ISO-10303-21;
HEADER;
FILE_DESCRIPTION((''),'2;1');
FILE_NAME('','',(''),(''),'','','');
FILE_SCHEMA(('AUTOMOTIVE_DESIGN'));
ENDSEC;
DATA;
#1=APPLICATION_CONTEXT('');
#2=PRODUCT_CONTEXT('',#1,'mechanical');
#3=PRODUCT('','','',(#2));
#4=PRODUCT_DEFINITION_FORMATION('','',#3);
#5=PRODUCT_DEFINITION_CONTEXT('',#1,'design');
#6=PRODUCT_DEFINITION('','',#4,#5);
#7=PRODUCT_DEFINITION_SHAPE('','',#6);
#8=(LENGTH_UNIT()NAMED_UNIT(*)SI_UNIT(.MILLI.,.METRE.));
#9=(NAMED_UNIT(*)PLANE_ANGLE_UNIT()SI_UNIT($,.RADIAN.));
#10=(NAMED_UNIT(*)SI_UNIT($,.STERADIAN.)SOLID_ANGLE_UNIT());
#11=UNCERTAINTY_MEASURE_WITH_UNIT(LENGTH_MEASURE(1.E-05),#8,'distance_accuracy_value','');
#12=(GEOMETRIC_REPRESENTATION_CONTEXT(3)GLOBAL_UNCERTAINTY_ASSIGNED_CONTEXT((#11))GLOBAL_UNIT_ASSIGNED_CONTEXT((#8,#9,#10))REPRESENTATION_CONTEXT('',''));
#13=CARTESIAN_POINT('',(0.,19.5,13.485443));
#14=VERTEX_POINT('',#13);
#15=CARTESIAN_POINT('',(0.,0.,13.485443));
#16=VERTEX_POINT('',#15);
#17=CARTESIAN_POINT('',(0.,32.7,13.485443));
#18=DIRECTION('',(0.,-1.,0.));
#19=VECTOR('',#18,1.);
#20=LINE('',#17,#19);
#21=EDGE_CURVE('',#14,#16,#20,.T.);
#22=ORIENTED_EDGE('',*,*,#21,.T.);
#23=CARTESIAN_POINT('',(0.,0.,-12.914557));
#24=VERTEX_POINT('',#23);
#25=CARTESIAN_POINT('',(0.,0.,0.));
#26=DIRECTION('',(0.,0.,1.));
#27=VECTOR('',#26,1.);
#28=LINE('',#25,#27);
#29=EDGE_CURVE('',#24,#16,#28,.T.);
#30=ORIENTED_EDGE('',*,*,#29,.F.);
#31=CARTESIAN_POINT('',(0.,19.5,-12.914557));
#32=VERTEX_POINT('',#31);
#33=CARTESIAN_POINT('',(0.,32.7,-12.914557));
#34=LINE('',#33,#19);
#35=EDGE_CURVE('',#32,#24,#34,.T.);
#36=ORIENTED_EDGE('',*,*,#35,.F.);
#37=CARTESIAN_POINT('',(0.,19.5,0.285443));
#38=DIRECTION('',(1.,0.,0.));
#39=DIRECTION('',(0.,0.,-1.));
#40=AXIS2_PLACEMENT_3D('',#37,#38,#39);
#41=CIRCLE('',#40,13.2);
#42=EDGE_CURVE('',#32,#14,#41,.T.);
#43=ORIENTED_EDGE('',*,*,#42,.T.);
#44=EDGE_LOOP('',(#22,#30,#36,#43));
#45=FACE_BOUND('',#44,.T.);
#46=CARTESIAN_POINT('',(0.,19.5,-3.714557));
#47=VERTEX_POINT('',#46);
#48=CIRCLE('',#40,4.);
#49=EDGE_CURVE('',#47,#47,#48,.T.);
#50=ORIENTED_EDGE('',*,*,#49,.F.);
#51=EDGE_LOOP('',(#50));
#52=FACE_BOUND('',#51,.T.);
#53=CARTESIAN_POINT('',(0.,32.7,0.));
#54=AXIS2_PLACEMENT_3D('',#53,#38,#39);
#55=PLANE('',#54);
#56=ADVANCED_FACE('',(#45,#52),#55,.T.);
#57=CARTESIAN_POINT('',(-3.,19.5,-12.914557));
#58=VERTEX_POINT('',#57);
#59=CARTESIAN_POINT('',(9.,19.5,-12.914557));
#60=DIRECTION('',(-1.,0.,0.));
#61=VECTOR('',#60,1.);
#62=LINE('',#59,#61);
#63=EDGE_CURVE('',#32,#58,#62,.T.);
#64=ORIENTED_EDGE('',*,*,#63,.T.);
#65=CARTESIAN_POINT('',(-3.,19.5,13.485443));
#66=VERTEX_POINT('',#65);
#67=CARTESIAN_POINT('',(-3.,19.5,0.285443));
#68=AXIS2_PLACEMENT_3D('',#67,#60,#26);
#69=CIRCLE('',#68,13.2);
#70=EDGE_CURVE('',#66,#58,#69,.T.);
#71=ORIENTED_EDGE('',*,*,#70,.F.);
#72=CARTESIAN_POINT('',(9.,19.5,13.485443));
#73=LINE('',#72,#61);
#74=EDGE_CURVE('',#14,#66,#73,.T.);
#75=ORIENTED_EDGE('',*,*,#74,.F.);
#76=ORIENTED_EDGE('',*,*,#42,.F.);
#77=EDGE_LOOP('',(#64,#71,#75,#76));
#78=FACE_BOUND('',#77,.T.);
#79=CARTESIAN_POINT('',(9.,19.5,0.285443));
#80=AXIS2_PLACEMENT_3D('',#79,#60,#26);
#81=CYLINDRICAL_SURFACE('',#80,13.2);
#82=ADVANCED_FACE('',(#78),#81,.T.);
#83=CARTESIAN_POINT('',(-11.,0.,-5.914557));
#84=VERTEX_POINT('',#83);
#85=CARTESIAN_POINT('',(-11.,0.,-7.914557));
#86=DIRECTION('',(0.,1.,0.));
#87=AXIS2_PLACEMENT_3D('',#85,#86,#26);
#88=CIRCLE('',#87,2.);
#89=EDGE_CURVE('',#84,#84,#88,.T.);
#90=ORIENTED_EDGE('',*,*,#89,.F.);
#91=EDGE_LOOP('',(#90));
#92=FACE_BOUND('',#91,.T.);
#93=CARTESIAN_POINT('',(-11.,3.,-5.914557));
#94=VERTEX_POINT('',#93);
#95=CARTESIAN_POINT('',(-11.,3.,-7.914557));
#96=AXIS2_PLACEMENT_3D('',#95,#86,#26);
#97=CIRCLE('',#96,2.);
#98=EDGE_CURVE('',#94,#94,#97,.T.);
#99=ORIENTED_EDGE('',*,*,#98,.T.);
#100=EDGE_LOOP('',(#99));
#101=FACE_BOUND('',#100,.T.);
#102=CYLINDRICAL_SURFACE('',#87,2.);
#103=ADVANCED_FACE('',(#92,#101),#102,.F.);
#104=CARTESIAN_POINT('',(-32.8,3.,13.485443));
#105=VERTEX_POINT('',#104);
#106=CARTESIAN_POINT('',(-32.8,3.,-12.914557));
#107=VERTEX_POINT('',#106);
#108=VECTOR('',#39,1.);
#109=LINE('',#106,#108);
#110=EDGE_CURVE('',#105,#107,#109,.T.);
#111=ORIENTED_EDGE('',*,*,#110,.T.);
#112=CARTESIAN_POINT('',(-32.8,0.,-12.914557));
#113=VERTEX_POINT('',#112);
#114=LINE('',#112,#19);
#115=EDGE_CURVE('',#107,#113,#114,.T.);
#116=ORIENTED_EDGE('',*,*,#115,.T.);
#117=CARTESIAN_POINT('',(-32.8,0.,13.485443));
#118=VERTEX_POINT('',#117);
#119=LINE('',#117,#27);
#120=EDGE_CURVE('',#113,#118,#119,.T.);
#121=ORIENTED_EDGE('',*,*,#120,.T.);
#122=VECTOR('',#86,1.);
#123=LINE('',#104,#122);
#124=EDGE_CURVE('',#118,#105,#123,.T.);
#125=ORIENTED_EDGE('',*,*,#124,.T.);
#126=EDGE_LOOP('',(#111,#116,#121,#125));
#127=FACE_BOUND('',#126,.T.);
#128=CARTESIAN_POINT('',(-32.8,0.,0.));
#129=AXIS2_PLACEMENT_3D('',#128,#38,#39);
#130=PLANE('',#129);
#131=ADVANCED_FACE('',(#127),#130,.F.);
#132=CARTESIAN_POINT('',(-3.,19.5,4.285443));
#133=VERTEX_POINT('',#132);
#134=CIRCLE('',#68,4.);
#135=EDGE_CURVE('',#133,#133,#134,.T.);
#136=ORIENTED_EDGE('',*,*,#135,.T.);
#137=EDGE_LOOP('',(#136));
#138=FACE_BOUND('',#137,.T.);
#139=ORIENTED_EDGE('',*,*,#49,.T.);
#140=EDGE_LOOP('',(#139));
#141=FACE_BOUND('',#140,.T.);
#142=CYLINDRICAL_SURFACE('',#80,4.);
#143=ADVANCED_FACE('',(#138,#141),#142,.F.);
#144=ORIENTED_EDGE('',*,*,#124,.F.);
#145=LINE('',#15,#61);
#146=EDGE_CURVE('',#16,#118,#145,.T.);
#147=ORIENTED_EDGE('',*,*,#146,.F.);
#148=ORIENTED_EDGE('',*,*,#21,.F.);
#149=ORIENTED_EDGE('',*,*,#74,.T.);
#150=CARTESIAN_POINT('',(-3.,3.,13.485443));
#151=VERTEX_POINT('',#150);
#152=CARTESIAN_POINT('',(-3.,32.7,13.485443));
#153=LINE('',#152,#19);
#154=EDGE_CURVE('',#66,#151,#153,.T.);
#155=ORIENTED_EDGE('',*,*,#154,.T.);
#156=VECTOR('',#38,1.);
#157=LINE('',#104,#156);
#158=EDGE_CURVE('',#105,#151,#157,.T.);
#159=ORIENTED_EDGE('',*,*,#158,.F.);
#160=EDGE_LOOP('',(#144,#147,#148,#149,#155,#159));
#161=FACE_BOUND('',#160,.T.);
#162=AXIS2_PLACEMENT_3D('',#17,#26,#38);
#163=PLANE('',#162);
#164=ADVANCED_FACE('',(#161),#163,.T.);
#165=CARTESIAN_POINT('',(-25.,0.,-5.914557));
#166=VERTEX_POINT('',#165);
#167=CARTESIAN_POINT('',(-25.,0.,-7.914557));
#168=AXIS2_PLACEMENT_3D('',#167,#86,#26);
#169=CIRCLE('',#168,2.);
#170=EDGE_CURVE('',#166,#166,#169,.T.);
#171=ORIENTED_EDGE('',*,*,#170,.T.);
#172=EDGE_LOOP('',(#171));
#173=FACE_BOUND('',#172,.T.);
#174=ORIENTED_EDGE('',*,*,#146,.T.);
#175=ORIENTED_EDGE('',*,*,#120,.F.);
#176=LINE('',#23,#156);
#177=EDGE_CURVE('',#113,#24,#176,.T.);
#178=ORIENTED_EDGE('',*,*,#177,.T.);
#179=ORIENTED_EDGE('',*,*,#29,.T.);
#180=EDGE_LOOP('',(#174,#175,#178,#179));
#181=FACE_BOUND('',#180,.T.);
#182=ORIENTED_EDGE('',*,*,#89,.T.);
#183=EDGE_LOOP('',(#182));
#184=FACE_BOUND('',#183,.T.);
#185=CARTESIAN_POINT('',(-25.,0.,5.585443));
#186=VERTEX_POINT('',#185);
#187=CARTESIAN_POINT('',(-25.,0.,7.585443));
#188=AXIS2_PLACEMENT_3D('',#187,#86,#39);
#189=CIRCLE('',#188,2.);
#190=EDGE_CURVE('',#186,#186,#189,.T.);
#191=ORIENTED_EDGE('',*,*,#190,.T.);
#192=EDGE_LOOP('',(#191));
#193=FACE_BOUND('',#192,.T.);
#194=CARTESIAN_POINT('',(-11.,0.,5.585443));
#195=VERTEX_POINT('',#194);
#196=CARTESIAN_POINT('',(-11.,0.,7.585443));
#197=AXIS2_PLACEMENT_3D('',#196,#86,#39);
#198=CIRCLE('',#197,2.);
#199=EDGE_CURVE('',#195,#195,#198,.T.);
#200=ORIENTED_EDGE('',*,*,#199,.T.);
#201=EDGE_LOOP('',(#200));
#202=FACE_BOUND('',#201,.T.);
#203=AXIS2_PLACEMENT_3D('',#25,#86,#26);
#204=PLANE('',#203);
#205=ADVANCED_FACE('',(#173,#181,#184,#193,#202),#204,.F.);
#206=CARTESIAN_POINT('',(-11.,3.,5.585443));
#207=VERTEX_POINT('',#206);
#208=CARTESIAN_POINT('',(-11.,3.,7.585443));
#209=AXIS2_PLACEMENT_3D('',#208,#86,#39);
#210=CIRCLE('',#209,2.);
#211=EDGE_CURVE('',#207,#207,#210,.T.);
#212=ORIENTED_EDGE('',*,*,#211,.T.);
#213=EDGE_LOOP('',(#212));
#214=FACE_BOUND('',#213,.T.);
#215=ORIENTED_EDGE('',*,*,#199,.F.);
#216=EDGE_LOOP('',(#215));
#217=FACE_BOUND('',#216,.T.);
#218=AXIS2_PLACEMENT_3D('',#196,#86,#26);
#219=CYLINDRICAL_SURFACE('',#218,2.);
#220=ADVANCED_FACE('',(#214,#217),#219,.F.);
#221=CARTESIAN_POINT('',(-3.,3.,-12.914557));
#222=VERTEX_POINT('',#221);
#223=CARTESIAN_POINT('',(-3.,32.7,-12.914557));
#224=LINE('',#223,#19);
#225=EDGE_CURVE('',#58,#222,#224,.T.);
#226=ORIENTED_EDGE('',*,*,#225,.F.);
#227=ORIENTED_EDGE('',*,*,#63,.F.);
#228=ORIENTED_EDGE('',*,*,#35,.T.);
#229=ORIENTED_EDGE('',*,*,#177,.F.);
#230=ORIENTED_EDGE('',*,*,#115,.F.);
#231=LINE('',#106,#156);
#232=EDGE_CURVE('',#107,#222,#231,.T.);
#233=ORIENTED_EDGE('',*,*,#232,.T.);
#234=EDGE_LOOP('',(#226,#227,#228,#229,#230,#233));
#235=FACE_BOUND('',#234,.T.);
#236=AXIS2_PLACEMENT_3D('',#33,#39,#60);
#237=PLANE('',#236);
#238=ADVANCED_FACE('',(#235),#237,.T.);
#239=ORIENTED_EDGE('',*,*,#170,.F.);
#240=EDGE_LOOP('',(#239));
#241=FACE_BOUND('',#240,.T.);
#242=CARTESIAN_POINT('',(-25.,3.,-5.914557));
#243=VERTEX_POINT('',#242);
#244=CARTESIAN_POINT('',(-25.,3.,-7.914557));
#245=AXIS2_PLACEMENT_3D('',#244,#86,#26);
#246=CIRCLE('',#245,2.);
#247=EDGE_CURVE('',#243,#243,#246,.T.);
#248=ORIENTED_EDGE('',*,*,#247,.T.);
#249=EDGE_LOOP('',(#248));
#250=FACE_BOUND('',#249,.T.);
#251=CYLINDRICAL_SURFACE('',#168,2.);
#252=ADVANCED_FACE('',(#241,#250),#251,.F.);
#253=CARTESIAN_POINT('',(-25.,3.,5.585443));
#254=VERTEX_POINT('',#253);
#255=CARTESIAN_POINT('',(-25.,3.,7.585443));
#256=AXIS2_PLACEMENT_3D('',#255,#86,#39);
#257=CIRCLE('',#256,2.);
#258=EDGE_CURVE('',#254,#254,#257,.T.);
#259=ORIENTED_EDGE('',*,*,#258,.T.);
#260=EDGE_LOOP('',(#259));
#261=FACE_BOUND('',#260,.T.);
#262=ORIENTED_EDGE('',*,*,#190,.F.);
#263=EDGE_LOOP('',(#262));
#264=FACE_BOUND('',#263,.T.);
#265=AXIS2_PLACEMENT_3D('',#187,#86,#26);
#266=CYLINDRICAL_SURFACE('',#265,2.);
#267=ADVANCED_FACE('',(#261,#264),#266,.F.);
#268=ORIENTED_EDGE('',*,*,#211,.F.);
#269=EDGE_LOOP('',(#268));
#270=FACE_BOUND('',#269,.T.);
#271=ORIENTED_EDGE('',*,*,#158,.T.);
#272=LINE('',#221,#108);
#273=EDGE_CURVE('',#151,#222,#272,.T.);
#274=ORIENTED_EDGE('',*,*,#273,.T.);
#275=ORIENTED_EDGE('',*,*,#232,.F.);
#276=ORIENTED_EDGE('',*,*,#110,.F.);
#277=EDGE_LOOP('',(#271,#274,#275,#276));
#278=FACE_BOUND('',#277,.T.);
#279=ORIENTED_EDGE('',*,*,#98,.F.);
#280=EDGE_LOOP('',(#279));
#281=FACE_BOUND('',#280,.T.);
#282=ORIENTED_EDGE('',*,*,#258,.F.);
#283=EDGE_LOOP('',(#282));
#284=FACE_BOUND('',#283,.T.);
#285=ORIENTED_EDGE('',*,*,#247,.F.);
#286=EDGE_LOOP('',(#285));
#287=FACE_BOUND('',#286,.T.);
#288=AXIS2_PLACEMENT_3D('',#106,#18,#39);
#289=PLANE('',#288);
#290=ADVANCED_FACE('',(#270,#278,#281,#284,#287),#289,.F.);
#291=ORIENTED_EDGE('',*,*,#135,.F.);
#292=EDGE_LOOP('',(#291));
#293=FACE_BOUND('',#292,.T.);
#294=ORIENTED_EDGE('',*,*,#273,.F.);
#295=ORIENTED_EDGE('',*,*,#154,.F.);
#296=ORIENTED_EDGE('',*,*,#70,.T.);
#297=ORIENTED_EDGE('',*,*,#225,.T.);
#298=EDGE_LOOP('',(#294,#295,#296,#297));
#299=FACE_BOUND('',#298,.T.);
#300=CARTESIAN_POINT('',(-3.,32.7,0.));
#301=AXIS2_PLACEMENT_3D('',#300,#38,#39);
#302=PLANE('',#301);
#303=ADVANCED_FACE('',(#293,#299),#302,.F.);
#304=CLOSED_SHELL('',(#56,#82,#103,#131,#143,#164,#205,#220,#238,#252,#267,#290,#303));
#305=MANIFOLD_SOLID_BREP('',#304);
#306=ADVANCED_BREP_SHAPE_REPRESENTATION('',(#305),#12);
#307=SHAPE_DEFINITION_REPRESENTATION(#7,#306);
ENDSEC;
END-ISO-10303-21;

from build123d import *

# Parameters (mm, degrees)
BOSS_EXTRUDE1_OUTLINE_W = 3
BOSS_EXTRUDE1_OUTLINE_H = 26.4
BOSS_EXTRUDE1_DEPTH     = 32.7
SKETCH2_W               = 26.4
SKETCH2_H               = 3
BOSS_EXTRUDE2_DEPTH     = 29.8
SKETCH3_R               = 2
CUT_EXTRUDE1_DEPTH      = 3
CUT_EXTRUDE3_DEPTH      = 12
SKETCH6_R               = 4
CUT_EXTRUDE4_DEPTH      = 12


# Read off the part's stored shape, not the designer's step: Boss-Extrude1
with BuildPart() as part:
    # Boss-Extrude1 outline → Boss-Extrude1 (new body)
    with BuildSketch(Plane(origin=(0, 0, 0), x_dir=(1, 0, 0), z_dir=(0, 1, 0))):
        with Locations((-1.5, -0.285443038)):
            Rectangle(BOSS_EXTRUDE1_OUTLINE_W, BOSS_EXTRUDE1_OUTLINE_H)
    extrude(amount=BOSS_EXTRUDE1_DEPTH)

    # Sketch2 → Boss-Extrude2 (add)
    with BuildSketch(Plane.ZY.offset(3)):
        with Locations((0.285443038, 1.5)):
            Rectangle(SKETCH2_W, SKETCH2_H)
    extrude(amount=BOSS_EXTRUDE2_DEPTH)

    # Sketch3 → Cut-Extrude1 (cut)
    with BuildSketch(Plane(origin=(0, 3, 0), x_dir=(1, 0, 0), z_dir=(0, 1, 0))):
        with Locations(Location((-25, 7.914556962, 0), (0, 0, 270))):
            Circle(SKETCH3_R)
        with Locations(Location((-11, 7.914556962, 0), (0, 0, 270))):
            Circle(SKETCH3_R)
        with Locations(Location((-11, -7.585443038, 0), (0, 0, 90))):
            Circle(SKETCH3_R)
        with Locations(Location((-25, -7.585443038, 0), (0, 0, 90))):
            Circle(SKETCH3_R)
    extrude(amount=-CUT_EXTRUDE1_DEPTH, mode=Mode.SUBTRACT)

    # Sketch5 → Cut-Extrude3 (cut)
    with BuildSketch(Plane.ZY.offset(3)):
        with BuildLine():
            Line((0.285443053, 32.7), (-12.914556962, 32.7))
            Line((-12.914556962, 32.7), (-12.914556962, 19.5))
            ThreePointArc((-12.914556962, 19.5), (-9.048366468, 28.833809517), (0.285443053, 32.7))
        make_face()
        with BuildLine():
            Line((13.485443038, 32.7), (0.285443053, 32.7))
            ThreePointArc((0.285443053, 32.7), (9.619252555, 28.833809506), (13.485443038, 19.5))
            Line((13.485443038, 19.5), (13.485443038, 32.7))
        make_face()
    extrude(amount=-CUT_EXTRUDE3_DEPTH, mode=Mode.SUBTRACT)

    # Sketch6 → Cut-Extrude4 (cut)
    with BuildSketch(Plane.ZY.offset(3)):
        with Locations((0.285443038, 19.5)):
            Circle(SKETCH6_R)
    extrude(amount=-CUT_EXTRUDE4_DEPTH, mode=Mode.SUBTRACT)


solid = part.part
